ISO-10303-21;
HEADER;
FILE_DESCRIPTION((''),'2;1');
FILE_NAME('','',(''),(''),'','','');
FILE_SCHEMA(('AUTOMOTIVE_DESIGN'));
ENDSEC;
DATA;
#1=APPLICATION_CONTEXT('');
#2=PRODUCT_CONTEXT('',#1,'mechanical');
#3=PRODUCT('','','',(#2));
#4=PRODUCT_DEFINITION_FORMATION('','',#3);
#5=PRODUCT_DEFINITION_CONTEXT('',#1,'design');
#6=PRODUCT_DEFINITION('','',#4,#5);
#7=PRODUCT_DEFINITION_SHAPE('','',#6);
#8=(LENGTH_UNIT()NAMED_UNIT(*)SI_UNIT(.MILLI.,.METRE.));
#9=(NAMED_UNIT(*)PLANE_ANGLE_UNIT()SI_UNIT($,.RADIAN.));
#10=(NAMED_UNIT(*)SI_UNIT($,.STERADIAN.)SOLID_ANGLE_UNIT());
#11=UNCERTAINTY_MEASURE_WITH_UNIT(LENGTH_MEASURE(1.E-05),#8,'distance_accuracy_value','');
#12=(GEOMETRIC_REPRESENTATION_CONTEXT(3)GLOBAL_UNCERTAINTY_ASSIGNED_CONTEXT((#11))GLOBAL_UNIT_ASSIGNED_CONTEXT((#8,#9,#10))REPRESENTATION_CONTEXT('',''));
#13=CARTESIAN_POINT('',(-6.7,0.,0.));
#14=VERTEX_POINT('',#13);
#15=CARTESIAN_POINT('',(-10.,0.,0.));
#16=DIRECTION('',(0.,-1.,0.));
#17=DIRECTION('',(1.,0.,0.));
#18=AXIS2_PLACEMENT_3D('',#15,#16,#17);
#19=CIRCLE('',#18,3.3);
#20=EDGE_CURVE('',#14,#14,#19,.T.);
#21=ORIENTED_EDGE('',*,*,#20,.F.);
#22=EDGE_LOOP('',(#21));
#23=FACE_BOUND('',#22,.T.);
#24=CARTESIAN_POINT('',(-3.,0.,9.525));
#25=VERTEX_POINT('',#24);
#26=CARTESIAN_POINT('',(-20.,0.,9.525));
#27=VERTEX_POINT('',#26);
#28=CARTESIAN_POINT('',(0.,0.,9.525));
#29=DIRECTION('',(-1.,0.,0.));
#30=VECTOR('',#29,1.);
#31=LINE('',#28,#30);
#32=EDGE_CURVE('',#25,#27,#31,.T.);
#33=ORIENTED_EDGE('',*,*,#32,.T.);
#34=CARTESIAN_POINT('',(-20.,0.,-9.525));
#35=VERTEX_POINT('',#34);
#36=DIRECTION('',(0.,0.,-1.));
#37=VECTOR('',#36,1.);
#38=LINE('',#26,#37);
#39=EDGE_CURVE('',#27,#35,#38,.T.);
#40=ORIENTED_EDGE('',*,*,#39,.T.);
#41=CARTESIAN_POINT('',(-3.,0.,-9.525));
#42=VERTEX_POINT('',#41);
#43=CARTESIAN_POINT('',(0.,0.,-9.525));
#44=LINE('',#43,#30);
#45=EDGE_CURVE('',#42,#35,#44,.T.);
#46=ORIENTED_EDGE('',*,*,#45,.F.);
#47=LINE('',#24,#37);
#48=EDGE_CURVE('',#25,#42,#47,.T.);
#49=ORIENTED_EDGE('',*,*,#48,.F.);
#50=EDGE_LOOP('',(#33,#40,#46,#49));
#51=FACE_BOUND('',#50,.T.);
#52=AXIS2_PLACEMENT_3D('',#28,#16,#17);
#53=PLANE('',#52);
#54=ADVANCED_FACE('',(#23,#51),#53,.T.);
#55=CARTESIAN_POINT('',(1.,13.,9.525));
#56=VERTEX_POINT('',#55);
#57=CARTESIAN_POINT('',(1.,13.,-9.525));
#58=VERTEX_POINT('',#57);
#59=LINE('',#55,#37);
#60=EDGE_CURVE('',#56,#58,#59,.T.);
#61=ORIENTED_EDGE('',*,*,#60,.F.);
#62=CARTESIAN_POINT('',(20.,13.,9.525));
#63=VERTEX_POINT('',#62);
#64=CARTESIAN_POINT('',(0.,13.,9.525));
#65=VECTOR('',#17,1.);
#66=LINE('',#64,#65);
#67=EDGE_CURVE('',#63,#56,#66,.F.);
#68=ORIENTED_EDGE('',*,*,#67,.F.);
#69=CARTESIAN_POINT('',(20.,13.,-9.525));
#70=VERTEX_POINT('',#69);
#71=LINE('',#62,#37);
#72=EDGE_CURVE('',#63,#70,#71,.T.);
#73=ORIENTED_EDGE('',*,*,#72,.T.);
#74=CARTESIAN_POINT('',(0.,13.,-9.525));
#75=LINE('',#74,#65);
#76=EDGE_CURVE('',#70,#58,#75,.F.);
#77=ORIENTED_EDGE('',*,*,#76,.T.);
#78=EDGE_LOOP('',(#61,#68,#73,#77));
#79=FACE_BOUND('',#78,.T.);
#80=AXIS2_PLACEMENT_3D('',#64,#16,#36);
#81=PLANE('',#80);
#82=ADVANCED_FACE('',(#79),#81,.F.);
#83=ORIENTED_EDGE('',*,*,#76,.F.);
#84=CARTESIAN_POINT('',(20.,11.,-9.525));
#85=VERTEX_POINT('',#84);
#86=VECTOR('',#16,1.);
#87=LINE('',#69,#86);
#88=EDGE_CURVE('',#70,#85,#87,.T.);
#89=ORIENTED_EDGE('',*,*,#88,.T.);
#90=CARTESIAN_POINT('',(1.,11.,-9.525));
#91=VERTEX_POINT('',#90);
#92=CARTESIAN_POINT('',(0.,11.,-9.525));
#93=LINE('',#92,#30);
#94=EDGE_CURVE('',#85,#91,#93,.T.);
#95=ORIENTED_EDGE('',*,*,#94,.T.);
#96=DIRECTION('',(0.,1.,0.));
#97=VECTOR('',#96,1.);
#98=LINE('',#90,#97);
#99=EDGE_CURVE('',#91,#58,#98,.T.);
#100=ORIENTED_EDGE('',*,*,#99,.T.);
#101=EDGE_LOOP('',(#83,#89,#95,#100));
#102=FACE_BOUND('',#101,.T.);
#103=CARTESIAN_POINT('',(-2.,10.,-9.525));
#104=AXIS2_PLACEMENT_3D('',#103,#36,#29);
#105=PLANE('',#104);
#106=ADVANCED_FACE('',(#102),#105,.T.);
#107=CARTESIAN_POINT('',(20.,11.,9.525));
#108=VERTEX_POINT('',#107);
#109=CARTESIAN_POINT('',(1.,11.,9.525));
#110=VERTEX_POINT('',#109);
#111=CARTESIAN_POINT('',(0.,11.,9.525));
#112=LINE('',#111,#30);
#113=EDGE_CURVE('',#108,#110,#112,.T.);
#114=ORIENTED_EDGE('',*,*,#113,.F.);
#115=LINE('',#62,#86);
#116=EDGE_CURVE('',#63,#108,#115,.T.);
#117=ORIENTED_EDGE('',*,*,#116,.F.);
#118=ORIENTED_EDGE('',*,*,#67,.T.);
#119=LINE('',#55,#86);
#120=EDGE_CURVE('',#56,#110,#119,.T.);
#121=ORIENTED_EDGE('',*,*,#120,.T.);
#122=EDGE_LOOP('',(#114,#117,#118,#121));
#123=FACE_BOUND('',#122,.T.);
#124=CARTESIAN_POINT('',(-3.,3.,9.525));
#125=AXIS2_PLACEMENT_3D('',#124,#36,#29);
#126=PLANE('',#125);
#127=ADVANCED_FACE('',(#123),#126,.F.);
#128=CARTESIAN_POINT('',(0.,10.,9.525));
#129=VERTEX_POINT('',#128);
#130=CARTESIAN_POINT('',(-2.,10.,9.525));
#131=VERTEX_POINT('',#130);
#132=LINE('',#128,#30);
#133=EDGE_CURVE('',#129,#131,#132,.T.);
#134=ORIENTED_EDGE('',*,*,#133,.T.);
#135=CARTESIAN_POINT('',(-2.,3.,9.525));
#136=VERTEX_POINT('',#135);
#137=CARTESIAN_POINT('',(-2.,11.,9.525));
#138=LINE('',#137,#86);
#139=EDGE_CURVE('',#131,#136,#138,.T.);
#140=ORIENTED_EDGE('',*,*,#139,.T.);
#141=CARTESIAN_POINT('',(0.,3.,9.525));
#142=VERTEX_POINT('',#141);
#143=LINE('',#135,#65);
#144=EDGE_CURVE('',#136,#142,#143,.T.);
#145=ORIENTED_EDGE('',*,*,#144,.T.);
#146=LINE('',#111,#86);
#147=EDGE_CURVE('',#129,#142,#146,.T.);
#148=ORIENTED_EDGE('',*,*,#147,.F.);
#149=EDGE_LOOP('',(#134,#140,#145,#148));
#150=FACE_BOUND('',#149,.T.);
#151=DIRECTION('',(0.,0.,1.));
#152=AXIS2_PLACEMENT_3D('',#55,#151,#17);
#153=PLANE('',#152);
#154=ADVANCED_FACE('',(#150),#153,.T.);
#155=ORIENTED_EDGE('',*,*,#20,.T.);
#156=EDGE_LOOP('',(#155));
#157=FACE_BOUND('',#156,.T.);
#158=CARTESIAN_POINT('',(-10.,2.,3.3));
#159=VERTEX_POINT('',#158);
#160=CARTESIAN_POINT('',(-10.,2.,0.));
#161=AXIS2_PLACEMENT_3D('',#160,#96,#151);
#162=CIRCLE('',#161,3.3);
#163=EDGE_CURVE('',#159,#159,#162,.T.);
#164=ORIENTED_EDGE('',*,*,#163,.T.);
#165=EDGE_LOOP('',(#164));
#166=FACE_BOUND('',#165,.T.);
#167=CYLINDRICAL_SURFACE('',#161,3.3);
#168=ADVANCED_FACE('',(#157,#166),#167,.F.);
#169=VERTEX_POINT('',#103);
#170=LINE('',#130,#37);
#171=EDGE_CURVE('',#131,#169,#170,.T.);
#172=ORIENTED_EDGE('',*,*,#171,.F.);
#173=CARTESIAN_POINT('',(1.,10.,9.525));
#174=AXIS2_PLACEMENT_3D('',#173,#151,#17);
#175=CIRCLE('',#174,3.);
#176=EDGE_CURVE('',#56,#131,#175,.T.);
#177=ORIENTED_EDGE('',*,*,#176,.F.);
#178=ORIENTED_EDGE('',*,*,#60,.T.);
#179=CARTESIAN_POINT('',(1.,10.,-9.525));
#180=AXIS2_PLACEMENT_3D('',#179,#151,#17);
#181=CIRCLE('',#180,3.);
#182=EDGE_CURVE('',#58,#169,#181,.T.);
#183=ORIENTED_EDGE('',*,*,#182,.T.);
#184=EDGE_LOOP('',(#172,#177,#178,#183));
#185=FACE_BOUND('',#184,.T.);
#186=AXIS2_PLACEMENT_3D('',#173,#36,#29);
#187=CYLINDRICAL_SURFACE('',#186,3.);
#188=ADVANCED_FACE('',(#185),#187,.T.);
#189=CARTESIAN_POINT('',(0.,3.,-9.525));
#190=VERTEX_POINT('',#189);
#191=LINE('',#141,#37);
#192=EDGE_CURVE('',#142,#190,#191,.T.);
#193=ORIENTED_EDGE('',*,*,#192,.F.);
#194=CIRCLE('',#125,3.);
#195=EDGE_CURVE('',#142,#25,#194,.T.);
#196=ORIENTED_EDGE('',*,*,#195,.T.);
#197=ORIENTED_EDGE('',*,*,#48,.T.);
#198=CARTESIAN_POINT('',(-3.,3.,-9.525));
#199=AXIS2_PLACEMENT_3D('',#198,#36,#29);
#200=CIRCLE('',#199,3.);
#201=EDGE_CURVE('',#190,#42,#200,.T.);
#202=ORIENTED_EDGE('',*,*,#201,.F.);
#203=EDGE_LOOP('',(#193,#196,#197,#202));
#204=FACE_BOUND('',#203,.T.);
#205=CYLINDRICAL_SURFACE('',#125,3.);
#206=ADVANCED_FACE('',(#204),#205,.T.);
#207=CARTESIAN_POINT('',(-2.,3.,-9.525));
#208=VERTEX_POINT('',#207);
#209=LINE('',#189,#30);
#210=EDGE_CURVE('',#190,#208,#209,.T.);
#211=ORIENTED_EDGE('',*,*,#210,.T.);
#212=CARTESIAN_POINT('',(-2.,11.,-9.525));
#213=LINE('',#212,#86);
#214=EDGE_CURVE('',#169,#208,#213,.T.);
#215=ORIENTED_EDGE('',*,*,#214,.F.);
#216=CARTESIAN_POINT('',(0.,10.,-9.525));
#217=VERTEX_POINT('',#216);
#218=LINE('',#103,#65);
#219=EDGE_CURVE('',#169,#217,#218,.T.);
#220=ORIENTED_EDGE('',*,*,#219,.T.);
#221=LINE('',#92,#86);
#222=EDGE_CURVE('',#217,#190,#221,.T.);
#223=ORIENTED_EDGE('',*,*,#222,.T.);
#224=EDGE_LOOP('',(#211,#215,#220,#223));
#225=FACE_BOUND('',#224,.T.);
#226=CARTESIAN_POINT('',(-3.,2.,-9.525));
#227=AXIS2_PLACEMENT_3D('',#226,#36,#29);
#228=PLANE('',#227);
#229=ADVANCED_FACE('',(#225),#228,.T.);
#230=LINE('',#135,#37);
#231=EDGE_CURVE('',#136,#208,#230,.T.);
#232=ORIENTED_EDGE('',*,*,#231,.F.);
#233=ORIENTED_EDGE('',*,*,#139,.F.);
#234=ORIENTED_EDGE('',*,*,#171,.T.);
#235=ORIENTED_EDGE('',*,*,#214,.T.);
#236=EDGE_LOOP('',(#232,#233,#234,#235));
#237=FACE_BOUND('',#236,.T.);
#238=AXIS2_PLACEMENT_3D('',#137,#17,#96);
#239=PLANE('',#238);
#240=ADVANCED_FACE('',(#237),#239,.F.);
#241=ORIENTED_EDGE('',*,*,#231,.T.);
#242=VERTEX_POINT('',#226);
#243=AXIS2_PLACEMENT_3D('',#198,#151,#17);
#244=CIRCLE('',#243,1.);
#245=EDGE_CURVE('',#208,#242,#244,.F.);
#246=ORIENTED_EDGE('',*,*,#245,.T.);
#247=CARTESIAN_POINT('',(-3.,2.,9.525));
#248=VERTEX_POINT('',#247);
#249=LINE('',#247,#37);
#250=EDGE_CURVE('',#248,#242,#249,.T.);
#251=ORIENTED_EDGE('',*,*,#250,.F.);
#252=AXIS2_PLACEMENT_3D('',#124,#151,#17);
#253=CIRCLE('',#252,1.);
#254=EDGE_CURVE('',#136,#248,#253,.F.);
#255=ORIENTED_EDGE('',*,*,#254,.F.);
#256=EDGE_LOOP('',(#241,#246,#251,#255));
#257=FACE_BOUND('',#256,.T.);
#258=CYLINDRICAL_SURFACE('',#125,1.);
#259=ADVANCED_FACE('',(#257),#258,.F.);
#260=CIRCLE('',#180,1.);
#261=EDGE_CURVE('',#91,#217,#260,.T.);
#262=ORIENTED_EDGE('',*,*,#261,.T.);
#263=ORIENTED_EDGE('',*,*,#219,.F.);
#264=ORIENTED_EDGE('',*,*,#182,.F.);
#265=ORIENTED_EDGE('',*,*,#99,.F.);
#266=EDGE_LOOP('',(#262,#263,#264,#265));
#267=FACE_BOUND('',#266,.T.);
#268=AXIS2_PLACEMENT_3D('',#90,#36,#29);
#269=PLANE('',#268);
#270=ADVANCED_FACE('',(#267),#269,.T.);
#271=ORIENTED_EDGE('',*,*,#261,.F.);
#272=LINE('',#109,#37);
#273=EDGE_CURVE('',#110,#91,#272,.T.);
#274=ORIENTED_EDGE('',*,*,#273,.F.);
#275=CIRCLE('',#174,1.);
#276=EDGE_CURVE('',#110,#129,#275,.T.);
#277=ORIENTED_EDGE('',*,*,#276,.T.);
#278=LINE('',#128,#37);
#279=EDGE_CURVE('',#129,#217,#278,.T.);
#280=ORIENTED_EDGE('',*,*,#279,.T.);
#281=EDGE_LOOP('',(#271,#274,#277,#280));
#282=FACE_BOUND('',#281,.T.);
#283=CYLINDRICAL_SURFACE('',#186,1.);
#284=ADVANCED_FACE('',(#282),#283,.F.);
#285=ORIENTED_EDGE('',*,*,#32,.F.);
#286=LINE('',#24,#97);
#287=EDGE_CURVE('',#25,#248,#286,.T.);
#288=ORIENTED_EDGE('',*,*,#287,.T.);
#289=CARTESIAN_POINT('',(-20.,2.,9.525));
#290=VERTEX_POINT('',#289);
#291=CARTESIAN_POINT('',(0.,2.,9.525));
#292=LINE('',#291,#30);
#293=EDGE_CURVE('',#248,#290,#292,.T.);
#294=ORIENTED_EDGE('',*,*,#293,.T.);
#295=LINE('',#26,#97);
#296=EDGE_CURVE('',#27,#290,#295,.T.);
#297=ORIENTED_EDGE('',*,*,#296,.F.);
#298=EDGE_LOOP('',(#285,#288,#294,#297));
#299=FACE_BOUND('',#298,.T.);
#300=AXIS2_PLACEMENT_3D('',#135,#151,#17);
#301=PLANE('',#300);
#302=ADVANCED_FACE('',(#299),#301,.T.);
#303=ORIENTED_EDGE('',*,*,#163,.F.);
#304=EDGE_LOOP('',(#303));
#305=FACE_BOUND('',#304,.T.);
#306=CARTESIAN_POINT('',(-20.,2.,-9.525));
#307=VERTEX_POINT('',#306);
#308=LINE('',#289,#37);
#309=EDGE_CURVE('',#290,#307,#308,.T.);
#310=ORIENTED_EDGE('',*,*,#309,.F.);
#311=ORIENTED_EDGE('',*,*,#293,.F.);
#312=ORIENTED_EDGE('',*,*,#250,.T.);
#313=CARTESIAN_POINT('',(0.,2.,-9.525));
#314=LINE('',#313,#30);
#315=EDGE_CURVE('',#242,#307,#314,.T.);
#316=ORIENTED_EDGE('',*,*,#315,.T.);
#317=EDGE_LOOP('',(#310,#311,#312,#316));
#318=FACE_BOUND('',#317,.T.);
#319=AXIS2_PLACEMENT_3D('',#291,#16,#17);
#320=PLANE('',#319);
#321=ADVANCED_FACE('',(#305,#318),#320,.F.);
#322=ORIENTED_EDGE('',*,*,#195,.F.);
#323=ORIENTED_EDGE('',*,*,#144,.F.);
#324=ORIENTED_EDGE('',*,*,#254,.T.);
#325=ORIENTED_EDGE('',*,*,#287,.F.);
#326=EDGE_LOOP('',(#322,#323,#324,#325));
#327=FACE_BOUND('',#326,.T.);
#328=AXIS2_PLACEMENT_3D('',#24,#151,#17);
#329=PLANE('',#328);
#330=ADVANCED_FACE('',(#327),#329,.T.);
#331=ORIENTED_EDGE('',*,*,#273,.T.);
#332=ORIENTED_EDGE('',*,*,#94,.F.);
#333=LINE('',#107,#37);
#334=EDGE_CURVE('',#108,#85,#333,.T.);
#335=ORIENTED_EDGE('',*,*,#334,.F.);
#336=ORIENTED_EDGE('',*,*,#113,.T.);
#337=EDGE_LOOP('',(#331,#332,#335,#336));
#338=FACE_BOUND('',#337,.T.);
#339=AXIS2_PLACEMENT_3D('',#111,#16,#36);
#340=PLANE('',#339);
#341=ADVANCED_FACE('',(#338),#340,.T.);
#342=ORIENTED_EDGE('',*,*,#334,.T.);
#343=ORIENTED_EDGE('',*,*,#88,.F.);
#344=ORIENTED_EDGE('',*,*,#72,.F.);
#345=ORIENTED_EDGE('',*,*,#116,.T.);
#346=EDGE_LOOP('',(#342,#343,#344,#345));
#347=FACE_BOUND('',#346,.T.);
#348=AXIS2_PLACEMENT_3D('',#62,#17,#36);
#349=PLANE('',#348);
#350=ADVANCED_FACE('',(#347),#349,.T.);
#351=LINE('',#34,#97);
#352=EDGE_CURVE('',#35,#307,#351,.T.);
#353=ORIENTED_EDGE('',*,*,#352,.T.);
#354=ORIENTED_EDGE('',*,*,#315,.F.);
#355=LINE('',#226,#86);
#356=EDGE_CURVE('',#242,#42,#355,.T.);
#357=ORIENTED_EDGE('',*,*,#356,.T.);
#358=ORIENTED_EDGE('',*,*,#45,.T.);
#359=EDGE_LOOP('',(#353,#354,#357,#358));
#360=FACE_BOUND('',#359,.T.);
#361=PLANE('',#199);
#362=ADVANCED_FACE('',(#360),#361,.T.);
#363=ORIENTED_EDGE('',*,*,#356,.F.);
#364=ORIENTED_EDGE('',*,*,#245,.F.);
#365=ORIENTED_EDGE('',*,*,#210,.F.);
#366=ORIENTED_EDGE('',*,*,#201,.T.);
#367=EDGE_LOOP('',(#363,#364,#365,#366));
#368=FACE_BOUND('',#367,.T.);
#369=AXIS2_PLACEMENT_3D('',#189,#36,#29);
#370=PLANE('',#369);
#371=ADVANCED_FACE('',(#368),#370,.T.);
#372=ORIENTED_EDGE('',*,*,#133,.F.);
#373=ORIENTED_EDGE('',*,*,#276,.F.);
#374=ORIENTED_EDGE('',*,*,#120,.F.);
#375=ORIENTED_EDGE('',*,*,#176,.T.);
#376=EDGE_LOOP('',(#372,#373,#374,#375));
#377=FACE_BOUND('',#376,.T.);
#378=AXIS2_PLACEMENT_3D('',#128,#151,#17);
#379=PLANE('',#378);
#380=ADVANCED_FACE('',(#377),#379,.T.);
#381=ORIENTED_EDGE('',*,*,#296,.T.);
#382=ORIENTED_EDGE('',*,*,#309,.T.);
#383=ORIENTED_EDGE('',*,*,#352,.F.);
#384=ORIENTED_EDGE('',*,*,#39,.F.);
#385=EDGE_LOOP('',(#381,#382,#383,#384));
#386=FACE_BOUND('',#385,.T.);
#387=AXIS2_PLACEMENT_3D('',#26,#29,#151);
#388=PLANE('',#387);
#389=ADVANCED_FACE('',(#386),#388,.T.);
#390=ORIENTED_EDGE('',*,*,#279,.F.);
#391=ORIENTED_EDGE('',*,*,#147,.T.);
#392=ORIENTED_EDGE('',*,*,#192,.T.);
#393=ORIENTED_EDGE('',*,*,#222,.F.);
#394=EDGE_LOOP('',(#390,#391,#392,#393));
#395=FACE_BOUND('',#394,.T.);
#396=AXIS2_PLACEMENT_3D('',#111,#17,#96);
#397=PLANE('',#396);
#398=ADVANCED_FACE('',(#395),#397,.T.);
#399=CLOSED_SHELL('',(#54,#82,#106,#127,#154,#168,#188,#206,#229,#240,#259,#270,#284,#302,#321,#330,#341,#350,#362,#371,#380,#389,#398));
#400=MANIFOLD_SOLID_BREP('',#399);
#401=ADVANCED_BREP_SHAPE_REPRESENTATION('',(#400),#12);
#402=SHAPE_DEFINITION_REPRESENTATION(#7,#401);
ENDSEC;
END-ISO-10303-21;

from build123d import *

# Parameters (mm, degrees)
BRIDA_BASE1_DEPTH                = 9.525
TALADRO_DE_MARGEN_PARA_M65_D     = 6.6
TALADRO_DE_MARGEN_PARA_M65_DEPTH = 11.62
TALADRO_DE_MARGEN_PARA_M65_TIP   = 1.982840043


# Sheet-metal steps are written as plain solids
with BuildPart() as part:
    # Croquis1 → Brida base1 (new, symmetric)
    with BuildSketch(Plane.XY):
        with BuildLine():
            Line((20, 11), (1, 11))
            ThreePointArc((1, 11), (0.292893219, 10.707106781), (0, 10))
            Line((0, 10), (0, 3))
            ThreePointArc((0, 3), (-0.878679656, 0.878679656), (-3, 0))
            Line((-3, 0), (-20, 0))
            Line((-20, 0), (-20, 2))
            Line((-20, 2), (-3, 2))
            ThreePointArc((-3, 2), (-2.292893219, 2.292893219), (-2, 3))
            Line((-2, 3), (-2, 10))
            ThreePointArc((-2, 10), (-1.121320344, 12.121320344), (1, 13))
            Line((1, 13), (20, 13))
            Line((20, 13), (20, 11))
        make_face()
    extrude(amount=BRIDA_BASE1_DEPTH, both=True)

    # Taladro de margen para M65
    with Locations(Plane(origin=(-10, 2, 0), x_dir=(1, 0, 0), z_dir=(0, 1, 0))):
        with Locations((0, 0)):
            Hole(TALADRO_DE_MARGEN_PARA_M65_D / 2, depth=TALADRO_DE_MARGEN_PARA_M65_DEPTH)
            with Locations((0, 0, -(TALADRO_DE_MARGEN_PARA_M65_DEPTH + TALADRO_DE_MARGEN_PARA_M65_TIP / 2))):  # 118° drill point
                Cone(0, TALADRO_DE_MARGEN_PARA_M65_D / 2, TALADRO_DE_MARGEN_PARA_M65_TIP, mode=Mode.SUBTRACT)


solid = part.part
